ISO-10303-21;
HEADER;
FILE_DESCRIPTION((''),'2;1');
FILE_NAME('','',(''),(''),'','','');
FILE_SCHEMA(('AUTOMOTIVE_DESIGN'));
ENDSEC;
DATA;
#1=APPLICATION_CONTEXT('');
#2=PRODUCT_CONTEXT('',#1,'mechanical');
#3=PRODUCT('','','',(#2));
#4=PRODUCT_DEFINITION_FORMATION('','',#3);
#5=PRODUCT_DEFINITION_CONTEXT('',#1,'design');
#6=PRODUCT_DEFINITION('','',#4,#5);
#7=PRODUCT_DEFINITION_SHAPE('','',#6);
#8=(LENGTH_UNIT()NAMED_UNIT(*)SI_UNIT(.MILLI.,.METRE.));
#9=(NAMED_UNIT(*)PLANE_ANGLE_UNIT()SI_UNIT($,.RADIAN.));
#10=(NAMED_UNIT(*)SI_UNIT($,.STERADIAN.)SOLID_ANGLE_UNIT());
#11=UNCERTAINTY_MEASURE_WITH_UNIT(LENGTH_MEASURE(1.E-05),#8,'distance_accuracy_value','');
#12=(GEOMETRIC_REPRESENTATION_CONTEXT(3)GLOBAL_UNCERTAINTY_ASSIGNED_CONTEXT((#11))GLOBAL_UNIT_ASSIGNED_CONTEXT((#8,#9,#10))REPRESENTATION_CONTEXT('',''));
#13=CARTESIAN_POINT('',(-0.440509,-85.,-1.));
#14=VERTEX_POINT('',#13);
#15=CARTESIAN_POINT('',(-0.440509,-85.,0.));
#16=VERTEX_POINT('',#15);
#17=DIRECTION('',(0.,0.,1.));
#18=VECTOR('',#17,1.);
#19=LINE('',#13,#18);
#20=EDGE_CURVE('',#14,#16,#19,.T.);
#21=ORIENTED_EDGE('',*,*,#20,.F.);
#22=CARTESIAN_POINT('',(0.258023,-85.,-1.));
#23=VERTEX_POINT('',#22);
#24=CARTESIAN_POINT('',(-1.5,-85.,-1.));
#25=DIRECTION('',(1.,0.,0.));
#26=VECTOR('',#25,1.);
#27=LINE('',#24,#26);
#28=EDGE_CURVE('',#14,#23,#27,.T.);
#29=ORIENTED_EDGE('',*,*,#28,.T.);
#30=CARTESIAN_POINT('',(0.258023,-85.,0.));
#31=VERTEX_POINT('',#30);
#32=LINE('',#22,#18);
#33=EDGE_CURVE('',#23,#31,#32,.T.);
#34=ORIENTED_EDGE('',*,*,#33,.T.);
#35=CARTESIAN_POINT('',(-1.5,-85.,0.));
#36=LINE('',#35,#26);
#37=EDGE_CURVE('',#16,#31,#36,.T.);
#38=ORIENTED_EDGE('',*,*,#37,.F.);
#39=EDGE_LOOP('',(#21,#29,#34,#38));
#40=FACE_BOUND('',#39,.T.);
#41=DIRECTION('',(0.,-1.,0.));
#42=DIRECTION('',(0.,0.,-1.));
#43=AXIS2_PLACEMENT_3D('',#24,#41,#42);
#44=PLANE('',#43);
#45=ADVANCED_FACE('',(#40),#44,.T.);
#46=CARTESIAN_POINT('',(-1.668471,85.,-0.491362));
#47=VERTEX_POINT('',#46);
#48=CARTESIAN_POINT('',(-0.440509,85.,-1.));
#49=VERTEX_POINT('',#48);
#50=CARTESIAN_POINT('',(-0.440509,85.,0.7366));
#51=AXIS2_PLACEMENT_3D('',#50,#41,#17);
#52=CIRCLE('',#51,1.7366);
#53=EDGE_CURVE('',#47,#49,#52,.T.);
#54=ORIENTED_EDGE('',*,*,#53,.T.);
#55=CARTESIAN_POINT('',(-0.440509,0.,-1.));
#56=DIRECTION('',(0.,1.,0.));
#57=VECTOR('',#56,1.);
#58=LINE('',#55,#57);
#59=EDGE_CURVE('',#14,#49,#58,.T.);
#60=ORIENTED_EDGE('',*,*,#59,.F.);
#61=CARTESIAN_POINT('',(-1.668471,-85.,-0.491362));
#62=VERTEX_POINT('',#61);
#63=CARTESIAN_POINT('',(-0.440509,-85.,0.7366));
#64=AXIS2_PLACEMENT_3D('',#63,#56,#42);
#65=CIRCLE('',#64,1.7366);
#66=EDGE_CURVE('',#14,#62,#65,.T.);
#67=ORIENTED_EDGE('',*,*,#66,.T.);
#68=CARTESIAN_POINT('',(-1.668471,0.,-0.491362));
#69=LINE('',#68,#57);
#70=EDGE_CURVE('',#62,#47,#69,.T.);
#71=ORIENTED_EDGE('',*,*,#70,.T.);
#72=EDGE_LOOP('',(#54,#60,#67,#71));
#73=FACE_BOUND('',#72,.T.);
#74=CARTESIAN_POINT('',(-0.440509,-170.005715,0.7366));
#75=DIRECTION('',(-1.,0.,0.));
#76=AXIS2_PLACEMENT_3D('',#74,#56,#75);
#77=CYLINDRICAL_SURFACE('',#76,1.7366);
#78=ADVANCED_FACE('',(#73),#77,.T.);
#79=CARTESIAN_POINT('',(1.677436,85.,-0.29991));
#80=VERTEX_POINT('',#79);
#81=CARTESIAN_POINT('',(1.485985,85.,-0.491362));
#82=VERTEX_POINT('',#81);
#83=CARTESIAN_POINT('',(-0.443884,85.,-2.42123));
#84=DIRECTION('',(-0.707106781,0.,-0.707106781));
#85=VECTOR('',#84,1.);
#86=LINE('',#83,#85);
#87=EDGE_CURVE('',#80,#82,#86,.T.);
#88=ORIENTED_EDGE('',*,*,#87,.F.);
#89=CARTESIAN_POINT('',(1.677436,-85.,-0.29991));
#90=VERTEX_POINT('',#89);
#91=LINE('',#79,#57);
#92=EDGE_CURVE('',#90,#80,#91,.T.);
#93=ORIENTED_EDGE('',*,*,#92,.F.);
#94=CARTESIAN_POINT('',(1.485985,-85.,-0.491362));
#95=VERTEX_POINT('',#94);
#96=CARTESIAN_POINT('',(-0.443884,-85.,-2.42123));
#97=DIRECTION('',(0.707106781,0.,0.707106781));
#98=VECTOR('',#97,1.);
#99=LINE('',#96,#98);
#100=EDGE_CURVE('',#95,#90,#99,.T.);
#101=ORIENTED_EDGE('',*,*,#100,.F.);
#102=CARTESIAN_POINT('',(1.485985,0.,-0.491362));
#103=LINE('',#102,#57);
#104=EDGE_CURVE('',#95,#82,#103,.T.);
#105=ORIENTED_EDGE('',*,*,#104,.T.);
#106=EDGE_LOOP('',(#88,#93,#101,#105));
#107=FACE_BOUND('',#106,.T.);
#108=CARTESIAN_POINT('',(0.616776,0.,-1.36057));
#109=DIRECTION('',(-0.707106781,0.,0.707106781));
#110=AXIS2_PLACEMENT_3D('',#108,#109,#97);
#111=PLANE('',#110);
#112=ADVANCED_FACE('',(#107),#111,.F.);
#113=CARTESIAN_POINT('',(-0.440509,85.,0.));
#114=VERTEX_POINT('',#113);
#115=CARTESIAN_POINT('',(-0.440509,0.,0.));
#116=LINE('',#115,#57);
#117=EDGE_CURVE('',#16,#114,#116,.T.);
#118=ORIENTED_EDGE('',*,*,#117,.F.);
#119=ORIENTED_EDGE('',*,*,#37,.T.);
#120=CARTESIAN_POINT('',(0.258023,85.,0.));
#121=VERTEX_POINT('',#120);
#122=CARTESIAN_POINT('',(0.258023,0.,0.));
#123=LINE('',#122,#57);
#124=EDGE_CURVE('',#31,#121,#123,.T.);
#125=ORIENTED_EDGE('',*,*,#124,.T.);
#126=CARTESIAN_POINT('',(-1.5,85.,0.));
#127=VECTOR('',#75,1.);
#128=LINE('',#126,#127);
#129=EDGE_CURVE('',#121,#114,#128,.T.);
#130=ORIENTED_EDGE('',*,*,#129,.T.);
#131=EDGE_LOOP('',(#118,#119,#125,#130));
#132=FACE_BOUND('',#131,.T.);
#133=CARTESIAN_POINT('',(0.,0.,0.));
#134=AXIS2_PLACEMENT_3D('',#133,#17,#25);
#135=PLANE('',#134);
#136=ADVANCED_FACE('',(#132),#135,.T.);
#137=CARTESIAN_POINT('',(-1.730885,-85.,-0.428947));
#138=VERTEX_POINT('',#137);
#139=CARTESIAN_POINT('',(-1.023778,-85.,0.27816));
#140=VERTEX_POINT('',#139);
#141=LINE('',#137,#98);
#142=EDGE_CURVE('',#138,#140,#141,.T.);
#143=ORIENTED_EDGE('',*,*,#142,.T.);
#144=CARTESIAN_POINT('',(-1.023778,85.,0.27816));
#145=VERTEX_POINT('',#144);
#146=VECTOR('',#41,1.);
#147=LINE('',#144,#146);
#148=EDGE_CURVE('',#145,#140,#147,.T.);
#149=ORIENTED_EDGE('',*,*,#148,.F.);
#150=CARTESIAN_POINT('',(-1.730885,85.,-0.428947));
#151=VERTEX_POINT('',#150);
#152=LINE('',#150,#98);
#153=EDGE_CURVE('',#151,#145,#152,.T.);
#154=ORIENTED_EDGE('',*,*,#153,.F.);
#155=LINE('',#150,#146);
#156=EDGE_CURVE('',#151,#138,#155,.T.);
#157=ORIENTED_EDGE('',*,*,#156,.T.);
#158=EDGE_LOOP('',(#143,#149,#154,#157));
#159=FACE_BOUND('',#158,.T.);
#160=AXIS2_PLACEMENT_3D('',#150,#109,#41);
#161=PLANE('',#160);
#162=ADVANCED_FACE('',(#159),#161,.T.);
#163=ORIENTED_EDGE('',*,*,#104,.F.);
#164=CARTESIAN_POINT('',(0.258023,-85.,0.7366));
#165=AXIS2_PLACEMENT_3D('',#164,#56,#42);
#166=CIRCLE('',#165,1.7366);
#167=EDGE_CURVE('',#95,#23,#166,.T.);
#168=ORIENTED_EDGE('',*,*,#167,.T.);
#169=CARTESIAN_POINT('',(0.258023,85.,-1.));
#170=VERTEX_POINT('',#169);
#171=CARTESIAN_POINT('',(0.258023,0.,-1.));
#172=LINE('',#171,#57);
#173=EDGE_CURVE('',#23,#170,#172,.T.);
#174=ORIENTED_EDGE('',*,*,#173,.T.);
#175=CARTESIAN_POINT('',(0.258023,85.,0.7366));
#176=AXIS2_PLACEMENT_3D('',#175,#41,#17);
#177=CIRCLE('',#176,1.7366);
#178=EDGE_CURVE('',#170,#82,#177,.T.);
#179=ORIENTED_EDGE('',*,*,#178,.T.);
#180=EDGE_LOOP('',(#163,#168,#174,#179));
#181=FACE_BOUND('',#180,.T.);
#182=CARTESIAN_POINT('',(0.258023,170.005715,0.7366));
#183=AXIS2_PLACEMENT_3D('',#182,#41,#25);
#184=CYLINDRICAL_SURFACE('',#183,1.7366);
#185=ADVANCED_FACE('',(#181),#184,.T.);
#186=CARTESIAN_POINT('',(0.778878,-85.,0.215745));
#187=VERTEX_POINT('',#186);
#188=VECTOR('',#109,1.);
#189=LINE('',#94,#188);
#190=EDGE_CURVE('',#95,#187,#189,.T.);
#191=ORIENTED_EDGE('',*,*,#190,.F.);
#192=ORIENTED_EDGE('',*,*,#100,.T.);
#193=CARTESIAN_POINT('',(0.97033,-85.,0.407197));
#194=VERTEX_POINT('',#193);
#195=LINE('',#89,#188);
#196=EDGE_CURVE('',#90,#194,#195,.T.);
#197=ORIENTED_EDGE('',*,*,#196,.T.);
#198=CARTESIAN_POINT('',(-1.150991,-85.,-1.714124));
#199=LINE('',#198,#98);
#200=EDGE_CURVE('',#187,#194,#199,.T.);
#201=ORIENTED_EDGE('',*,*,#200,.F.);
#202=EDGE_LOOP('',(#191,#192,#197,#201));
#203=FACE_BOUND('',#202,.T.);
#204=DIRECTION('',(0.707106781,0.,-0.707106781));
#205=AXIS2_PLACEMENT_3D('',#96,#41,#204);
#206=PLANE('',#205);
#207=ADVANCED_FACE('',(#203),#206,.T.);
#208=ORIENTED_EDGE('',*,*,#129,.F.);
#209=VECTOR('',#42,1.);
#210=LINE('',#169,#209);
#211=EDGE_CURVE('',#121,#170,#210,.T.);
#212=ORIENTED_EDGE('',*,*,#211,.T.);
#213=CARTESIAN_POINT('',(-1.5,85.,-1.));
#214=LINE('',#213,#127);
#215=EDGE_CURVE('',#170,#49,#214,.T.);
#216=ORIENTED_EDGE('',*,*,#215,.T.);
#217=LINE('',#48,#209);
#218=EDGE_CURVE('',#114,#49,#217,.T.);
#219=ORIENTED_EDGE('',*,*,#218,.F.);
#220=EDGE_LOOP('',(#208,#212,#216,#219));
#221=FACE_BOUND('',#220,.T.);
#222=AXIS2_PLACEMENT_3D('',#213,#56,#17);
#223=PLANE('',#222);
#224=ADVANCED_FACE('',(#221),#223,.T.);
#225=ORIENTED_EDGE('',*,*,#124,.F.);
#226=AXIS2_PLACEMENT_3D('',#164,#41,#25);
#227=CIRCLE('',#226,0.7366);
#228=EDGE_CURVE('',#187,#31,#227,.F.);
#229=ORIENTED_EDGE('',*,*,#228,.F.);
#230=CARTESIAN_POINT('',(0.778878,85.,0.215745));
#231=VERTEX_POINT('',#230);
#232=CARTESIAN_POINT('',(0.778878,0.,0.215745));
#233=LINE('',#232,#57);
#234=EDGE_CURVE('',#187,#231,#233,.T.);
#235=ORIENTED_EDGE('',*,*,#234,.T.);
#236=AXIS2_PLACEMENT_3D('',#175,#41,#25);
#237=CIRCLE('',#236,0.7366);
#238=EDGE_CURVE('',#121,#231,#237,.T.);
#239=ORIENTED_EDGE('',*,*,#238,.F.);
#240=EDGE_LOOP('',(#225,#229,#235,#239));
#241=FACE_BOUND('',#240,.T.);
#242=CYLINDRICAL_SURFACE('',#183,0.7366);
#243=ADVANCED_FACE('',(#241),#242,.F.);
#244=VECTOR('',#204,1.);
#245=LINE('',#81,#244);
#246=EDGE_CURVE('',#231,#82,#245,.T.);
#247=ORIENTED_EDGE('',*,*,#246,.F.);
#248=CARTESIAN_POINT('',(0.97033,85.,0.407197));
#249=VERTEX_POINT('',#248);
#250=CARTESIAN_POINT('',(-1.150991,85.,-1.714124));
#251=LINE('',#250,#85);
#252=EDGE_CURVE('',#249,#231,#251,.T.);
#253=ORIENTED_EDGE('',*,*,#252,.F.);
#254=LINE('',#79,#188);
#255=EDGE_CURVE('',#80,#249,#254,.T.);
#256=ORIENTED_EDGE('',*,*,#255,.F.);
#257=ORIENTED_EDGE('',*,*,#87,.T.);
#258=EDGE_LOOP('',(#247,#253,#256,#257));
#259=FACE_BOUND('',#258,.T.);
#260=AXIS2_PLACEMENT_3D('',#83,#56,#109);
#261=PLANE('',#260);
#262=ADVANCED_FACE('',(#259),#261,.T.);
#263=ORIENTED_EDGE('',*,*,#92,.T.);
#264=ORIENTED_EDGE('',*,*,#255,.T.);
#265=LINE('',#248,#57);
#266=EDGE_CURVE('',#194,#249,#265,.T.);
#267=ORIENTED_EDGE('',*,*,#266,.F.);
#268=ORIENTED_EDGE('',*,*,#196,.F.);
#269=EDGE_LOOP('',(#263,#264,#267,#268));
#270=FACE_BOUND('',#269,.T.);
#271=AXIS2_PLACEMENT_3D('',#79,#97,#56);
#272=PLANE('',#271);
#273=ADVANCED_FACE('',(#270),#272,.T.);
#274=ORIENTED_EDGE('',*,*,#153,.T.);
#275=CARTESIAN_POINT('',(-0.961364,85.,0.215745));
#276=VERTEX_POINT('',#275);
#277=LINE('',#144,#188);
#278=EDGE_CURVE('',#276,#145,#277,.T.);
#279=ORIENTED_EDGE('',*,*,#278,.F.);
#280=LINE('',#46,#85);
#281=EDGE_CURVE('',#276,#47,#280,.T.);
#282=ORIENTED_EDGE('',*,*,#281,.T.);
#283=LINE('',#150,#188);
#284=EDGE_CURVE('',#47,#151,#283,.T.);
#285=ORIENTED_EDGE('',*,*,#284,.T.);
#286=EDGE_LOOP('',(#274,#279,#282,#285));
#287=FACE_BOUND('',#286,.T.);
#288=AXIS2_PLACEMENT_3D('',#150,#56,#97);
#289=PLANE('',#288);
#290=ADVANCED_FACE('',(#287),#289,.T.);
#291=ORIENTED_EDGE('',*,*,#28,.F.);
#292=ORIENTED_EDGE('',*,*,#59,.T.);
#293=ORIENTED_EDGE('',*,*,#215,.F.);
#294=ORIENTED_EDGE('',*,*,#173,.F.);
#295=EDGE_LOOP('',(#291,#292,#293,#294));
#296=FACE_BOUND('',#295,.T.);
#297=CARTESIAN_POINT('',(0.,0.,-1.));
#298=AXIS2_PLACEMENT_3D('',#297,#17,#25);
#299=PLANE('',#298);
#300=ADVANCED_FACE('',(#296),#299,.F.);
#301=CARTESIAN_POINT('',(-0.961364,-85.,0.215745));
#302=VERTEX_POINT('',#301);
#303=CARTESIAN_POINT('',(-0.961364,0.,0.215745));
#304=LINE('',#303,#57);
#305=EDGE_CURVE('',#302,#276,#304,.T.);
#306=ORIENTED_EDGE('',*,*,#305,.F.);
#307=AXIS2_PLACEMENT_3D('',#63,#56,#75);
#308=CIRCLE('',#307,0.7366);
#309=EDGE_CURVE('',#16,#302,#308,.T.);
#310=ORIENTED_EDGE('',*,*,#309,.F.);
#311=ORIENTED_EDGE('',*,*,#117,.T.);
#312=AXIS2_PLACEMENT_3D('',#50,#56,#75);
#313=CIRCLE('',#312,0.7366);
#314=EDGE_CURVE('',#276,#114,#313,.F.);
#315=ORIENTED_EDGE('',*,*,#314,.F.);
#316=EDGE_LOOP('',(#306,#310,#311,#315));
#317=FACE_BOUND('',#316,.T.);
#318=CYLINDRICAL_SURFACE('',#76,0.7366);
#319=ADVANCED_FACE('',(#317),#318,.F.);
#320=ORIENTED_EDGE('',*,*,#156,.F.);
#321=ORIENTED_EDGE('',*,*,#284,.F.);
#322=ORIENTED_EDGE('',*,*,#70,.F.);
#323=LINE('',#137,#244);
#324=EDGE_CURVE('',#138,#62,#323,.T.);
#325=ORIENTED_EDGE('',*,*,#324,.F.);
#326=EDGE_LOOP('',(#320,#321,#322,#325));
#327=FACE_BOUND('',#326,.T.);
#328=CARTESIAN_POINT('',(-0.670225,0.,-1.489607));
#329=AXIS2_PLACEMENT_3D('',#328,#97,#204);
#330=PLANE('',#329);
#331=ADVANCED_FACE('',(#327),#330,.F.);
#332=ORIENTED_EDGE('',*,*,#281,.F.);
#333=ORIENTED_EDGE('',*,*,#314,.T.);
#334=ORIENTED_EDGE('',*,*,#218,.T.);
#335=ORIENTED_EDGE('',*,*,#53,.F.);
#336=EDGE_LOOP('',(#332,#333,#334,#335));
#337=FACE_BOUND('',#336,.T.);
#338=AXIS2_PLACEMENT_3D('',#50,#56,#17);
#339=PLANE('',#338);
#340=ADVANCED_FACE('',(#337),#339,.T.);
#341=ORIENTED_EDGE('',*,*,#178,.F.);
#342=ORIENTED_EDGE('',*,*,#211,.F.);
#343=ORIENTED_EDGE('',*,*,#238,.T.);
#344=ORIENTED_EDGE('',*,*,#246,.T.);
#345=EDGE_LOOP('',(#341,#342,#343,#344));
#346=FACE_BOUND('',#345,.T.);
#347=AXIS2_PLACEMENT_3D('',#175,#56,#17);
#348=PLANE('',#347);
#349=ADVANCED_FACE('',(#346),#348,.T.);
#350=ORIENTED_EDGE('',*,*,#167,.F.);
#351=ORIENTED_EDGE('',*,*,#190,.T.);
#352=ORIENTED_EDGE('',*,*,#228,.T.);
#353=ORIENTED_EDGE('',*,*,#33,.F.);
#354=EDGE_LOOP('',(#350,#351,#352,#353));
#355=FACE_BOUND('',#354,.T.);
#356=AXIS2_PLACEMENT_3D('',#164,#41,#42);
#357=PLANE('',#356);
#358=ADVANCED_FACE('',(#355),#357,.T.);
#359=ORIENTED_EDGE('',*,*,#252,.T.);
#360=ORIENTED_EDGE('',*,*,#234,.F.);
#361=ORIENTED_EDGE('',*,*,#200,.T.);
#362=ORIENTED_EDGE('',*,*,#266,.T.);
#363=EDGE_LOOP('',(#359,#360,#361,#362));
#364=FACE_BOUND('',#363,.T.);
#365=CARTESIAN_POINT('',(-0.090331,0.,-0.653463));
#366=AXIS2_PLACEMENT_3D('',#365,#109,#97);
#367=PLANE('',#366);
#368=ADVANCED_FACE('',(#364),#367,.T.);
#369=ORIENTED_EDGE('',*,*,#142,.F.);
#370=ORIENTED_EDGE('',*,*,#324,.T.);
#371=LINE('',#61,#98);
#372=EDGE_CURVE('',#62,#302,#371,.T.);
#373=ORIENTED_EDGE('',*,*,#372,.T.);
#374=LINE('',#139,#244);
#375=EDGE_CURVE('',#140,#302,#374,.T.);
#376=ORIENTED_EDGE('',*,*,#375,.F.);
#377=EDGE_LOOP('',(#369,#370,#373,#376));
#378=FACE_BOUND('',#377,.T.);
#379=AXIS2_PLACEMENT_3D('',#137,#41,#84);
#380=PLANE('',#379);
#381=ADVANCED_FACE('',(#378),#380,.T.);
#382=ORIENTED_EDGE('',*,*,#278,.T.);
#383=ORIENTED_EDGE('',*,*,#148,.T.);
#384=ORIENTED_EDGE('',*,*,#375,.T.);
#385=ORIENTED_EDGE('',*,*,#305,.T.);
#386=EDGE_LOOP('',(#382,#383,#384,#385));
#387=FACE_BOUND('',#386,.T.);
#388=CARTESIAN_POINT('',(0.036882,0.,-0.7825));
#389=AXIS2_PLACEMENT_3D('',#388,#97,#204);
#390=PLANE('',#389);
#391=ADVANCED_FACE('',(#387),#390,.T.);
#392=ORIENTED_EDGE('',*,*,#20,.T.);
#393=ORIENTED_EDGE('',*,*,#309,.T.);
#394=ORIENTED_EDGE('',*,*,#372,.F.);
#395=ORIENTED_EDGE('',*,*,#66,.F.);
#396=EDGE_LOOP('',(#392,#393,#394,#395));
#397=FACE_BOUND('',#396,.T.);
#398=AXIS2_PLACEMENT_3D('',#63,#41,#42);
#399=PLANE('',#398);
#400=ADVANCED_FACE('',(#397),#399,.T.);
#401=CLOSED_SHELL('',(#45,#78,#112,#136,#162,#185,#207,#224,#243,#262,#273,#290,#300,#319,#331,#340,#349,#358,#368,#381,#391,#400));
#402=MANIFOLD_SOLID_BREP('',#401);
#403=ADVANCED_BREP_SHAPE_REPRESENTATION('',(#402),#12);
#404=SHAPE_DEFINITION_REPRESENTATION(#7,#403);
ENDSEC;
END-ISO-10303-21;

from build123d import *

# Parameters (mm, degrees)
SKETCH1_W              = 3
SKETCH1_H              = 170
BASE_FLANGE1_DEPTH     = 1
SKETCHED_START         = -85
SKETCHED_BEND1_DEPTH   = 170
SKETCHED_BEND1_2_DEPTH = 170


# Read off the part's stored shape, not the designer's step: Sketched Bend1
# Sheet-metal steps are written as plain solids
with BuildPart() as part:
    # Sketch1 → Base-Flange1 (new body)
    with BuildSketch(Plane.XY):
        Rectangle(SKETCH1_W, SKETCH1_H)
    extrude(amount=-BASE_FLANGE1_DEPTH)

    # Sketched Bend1 outline → Sketched Bend1 (cut)
    with BuildSketch(Plane(origin=(0, 0, 0), x_dir=(1, 0, 0), z_dir=(0, 1, 0)).offset(SKETCHED_START)):
        with BuildLine():
            ThreePointArc((-1.5, 0.63935721), (-1.000103552, 0.907368803), (-0.440508936, 1))
            Line((-0.440508936, 1), (-1.5, 1))
            Line((-1.5, 1), (-1.5, 0.63935721))
        make_face()
        with BuildLine():
            Line((1.5, 1), (0.258023252, 1))
            ThreePointArc((0.258023252, 1), (0.922591301, 0.867809196), (1.485984888, 0.491361636))
            Line((1.485984888, 0.491361636), (1.5, 0.477346524))
            Line((1.5, 0.477346524), (1.5, 1))
        make_face()
        Polygon((-1.301938308, 0), (-1.5, 0.198061692), (-1.5, 0), align=None)
        Polygon((1.5, 0), (1.5, 0.122473647), (1.377526353, 0), align=None)
    extrude(amount=SKETCHED_BEND1_DEPTH, mode=Mode.SUBTRACT)

    # Sketched Bend1 2 outline → Sketched Bend1 2 (add)
    with BuildSketch(Plane(origin=(0, 0, 0), x_dir=(1, 0, 0), z_dir=(0, 1, 0)).offset(SKETCHED_START)):
        with BuildLine():
            Line((-1.5, 0.198061692), (-1.5, 0.63935721))
            ThreePointArc((-1.5, 0.63935721), (-1.586626572, 0.568081541), (-1.668470572, 0.491361636))
            Line((-1.668470572, 0.491361636), (-1.730885258, 0.42894695))
            Line((-1.730885258, 0.42894695), (-1.5, 0.198061692))
        make_face()
        with BuildLine():
            Line((-0.440508936, 0), (-1.301938308, 0))
            Line((-1.301938308, 0), (-1.023778477, -0.278159831))
            Line((-1.023778477, -0.278159831), (-0.961363791, -0.215745145))
            ThreePointArc((-0.961363791, -0.215745145), (-0.722393552, -0.056070336), (-0.440508936, 0))
        make_face()
        Polygon((1.677436439, 0.299910086), (1.5, 0.477346524), (1.5, 0.122473647), align=None)
        with BuildLine():
            Line((1.377526353, 0), (0.258023252, 0))
            ThreePointArc((0.258023252, 0), (0.539907869, -0.056070336), (0.778878107, -0.215745145))
            Line((0.778878107, -0.215745145), (0.970329658, -0.407196695))
            Line((0.970329658, -0.407196695), (1.377526353, 0))
        make_face()
    extrude(amount=SKETCHED_BEND1_2_DEPTH)


solid = part.part
